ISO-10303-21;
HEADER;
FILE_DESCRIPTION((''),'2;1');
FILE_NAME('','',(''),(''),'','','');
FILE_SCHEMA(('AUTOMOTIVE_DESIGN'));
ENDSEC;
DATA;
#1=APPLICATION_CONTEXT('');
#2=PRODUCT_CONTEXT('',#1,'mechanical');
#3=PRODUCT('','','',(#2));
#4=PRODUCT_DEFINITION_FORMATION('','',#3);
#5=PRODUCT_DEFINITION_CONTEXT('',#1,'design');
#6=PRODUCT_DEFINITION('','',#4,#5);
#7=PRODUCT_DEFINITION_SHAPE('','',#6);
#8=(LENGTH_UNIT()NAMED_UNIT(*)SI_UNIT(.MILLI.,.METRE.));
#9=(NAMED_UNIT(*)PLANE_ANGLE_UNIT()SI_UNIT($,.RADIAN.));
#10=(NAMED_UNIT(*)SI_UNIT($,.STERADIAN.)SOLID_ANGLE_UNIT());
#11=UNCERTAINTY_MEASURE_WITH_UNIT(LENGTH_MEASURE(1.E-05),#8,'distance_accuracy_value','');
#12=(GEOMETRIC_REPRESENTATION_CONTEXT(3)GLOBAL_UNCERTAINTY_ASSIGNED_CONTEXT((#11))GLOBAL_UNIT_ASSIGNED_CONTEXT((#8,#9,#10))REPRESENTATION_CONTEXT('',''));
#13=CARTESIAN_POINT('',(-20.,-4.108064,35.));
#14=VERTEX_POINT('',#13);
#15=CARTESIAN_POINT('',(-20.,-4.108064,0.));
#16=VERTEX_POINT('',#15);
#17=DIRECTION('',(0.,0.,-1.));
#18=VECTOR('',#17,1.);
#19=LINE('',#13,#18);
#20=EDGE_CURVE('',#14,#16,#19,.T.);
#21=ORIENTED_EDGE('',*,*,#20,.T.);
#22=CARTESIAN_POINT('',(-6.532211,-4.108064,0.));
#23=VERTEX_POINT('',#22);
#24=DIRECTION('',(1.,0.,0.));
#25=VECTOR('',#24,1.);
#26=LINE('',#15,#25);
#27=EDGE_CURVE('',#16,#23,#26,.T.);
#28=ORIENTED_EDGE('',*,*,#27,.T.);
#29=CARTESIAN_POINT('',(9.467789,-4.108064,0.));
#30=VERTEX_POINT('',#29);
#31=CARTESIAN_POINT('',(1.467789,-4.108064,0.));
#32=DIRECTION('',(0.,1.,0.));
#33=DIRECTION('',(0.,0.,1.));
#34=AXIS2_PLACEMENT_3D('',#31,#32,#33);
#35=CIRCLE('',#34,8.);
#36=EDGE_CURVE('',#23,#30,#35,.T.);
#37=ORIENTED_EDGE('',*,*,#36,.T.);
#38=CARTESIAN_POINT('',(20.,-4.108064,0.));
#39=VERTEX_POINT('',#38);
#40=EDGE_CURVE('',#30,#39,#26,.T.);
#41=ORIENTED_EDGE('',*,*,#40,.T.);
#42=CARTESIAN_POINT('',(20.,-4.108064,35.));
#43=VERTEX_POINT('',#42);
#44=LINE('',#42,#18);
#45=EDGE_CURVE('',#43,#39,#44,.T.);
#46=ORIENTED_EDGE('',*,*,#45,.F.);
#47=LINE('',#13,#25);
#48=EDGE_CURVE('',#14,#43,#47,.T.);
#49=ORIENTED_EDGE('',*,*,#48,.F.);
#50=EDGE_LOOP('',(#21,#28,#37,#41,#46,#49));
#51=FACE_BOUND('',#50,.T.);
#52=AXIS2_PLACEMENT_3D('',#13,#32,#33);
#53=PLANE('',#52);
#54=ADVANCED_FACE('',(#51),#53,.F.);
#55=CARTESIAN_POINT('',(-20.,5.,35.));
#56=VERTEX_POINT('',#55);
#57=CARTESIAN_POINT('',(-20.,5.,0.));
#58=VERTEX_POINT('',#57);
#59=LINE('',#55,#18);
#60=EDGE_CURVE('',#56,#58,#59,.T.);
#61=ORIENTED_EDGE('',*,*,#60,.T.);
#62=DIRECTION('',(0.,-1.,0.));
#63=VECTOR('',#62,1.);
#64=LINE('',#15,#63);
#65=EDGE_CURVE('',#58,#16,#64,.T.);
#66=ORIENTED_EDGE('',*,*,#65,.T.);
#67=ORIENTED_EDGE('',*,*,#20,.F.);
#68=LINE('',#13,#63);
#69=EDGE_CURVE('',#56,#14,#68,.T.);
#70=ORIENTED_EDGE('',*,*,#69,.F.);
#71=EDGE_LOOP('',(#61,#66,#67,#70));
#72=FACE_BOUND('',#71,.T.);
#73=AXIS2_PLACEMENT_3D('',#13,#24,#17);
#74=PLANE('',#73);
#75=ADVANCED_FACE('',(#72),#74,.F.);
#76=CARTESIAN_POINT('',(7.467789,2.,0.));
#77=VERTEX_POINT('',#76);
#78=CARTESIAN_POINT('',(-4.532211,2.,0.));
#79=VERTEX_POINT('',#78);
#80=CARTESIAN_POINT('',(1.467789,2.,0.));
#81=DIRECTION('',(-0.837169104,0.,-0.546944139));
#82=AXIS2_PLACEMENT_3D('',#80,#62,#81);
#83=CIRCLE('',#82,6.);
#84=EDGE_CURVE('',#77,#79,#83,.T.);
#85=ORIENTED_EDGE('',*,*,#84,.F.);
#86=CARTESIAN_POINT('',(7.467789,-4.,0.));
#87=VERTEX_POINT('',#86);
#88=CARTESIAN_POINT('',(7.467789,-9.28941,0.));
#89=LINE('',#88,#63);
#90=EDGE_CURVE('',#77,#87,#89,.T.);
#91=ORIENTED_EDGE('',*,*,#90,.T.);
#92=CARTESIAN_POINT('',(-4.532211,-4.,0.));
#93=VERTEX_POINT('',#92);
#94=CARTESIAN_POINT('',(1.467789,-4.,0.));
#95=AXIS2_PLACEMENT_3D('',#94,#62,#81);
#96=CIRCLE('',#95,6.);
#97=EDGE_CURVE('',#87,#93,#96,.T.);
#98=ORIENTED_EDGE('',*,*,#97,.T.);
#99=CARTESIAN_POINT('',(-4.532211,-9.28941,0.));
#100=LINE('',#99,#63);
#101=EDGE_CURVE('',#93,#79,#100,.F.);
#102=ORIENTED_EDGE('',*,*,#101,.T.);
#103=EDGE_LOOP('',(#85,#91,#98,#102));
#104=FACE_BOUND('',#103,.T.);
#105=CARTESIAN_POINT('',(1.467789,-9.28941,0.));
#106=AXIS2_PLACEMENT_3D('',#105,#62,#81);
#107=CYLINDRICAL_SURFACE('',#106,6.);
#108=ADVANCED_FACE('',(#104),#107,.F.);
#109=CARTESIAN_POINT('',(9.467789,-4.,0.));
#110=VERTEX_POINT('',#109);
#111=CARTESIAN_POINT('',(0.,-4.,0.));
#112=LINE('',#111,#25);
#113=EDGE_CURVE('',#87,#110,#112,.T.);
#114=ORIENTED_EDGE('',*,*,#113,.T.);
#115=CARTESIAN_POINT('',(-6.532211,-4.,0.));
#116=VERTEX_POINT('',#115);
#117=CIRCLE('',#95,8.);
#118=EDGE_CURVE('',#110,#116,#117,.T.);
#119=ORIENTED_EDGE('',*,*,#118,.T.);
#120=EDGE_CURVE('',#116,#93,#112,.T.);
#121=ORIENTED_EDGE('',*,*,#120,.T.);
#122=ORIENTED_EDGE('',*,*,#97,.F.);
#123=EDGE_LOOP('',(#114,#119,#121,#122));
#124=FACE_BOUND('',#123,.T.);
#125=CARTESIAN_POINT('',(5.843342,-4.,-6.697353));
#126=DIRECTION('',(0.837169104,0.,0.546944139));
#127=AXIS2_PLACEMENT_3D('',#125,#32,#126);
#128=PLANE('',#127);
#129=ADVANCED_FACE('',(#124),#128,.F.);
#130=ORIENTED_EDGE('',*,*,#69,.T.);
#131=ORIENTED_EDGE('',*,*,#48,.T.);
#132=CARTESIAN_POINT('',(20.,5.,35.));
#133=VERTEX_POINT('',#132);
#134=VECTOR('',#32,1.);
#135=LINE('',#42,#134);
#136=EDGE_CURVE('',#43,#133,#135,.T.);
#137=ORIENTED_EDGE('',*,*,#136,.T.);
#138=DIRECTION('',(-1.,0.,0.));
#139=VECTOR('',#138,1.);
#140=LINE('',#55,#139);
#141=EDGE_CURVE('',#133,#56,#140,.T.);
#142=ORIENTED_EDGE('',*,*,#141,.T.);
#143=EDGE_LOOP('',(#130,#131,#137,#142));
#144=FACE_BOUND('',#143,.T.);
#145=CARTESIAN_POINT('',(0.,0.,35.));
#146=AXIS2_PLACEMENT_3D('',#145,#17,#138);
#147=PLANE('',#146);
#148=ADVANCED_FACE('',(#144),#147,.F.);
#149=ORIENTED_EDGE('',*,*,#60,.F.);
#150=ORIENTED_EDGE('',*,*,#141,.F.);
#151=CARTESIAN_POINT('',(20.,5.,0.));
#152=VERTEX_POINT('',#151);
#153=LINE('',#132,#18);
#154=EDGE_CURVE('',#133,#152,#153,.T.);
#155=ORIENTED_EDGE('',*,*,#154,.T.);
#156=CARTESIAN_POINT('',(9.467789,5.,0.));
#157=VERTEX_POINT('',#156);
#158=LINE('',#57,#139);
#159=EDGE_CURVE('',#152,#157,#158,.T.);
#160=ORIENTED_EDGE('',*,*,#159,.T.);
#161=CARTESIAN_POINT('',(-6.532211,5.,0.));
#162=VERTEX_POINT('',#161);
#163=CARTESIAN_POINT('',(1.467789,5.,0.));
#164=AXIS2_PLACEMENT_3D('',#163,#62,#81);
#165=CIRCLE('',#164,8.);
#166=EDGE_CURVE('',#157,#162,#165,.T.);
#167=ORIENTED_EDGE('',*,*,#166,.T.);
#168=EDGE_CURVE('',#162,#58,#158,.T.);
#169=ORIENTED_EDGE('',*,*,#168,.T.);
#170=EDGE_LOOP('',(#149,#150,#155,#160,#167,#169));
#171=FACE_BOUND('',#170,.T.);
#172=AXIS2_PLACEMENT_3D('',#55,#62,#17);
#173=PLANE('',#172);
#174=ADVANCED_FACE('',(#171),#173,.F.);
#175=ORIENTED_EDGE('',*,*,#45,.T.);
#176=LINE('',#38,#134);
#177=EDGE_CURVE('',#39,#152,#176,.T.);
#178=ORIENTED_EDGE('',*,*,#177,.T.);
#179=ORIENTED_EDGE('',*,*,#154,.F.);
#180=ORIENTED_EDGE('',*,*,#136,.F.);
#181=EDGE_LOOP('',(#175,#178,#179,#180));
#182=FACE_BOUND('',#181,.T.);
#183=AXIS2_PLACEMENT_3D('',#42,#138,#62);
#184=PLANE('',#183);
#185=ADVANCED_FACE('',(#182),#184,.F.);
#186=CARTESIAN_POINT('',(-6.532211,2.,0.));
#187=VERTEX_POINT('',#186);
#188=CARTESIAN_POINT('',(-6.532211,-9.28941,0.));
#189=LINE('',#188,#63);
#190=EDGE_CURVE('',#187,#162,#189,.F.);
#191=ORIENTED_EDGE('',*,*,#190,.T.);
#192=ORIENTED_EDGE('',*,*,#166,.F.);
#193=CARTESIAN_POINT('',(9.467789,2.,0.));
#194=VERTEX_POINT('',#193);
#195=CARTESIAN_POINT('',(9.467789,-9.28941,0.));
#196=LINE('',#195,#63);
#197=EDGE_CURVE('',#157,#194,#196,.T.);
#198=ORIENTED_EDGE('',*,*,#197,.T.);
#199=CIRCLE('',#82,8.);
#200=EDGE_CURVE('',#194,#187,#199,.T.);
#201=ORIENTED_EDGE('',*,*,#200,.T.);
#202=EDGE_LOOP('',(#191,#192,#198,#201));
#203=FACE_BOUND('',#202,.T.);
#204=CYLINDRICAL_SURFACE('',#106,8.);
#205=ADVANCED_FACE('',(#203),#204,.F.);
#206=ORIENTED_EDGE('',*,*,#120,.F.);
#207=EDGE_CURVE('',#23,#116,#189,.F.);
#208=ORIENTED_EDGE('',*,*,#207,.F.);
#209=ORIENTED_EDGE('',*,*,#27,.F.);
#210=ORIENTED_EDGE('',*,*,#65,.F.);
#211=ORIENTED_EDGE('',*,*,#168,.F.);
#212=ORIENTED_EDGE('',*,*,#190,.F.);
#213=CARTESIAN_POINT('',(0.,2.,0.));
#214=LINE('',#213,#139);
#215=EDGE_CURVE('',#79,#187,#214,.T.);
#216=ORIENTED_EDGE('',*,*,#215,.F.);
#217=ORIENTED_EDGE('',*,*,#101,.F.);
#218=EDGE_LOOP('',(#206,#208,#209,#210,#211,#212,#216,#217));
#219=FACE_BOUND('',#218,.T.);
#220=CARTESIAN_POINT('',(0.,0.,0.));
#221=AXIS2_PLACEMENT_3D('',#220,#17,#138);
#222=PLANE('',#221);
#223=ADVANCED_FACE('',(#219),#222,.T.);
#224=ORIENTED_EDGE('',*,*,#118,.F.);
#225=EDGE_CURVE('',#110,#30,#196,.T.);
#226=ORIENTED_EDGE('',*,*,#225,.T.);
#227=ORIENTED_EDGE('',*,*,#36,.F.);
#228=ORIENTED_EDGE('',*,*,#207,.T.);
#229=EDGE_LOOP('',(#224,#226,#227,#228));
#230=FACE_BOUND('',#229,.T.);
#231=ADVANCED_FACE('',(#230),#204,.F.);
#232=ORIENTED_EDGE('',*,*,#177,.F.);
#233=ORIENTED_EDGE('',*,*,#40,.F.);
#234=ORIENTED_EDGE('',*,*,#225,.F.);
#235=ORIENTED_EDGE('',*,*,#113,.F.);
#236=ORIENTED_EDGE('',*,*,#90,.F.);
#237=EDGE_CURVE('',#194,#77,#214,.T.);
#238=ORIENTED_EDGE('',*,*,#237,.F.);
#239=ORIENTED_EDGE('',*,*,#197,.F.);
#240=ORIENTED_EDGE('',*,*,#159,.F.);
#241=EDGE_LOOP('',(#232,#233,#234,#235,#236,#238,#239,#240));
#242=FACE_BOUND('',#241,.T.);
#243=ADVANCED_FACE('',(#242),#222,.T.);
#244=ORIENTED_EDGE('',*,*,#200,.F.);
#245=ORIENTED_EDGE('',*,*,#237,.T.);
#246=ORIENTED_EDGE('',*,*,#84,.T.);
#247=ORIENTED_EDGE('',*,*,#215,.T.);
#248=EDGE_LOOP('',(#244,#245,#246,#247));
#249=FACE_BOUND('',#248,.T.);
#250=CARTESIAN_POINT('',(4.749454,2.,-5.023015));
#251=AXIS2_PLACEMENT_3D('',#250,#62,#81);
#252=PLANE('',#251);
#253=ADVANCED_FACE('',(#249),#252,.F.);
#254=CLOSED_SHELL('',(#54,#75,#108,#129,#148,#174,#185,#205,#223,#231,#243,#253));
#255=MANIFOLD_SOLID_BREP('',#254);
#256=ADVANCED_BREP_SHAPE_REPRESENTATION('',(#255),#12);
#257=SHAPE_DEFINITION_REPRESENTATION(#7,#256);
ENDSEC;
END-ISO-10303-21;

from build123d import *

# Parameters (mm, degrees)
SKETCH1_W           = 40
SKETCH1_H           = 9.108063915
BOSS_EXTRUDE1_DEPTH = 35
CAVITY1_START       = -4.108063915
CAVITY1_DEPTH       = 9.108063915
CAVITY1_START_2     = 2
CAVITY1_2_DEPTH     = 3
CAVITY1_3_DEPTH     = 0.108063915


# Read off the part's stored shape, not the designer's step: Cavity1
with BuildPart() as part:
    # Sketch1 → Boss-Extrude1 (new body)
    with BuildSketch(Plane.XY):
        with Locations((0, 0.445968042)):
            Rectangle(SKETCH1_W, SKETCH1_H)
    extrude(amount=BOSS_EXTRUDE1_DEPTH)

    # Cavity1 outline → Cavity1 (cut)
    with BuildSketch(Plane(origin=(0, 0, 0), x_dir=(1, 0, 0), z_dir=(0, 1, 0)).offset(CAVITY1_START)):
        with BuildLine():
            ThreePointArc((-4.532210811, 0), (1.467789189, -6), (7.467789189, 0))
            Line((7.467789189, 0), (-4.532210811, 0))
        make_face()
    extrude(amount=CAVITY1_DEPTH, mode=Mode.SUBTRACT)

    # Cavity1 2 outline → Cavity1 2 (cut)
    with BuildSketch(Plane(origin=(0, 0, 0), x_dir=(1, 0, 0), z_dir=(0, 1, 0)).offset(CAVITY1_START_2)):
        with BuildLine():
            ThreePointArc((-6.532210811, 0), (1.467789189, -8), (9.467789189, 0))
            Line((9.467789189, 0), (7.467789189, 0))
            ThreePointArc((7.467789189, 0), (1.467789189, -6), (-4.532210811, 0))
            Line((-4.532210811, 0), (-6.532210811, 0))
        make_face()
    extrude(amount=CAVITY1_2_DEPTH, mode=Mode.SUBTRACT)

    # Cavity1 3 outline → Cavity1 3 (cut)
    with BuildSketch(Plane(origin=(0, 0, 0), x_dir=(1, 0, 0), z_dir=(0, 1, 0)).offset(CAVITY1_START)):
        with BuildLine():
            ThreePointArc((-6.532210811, 0), (1.467789189, -8), (9.467789189, 0))
            Line((9.467789189, 0), (7.467789189, 0))
            ThreePointArc((7.467789189, 0), (1.467789189, -6), (-4.532210811, 0))
            Line((-4.532210811, 0), (-6.532210811, 0))
        make_face()
    extrude(amount=CAVITY1_3_DEPTH, mode=Mode.SUBTRACT)


solid = part.part
